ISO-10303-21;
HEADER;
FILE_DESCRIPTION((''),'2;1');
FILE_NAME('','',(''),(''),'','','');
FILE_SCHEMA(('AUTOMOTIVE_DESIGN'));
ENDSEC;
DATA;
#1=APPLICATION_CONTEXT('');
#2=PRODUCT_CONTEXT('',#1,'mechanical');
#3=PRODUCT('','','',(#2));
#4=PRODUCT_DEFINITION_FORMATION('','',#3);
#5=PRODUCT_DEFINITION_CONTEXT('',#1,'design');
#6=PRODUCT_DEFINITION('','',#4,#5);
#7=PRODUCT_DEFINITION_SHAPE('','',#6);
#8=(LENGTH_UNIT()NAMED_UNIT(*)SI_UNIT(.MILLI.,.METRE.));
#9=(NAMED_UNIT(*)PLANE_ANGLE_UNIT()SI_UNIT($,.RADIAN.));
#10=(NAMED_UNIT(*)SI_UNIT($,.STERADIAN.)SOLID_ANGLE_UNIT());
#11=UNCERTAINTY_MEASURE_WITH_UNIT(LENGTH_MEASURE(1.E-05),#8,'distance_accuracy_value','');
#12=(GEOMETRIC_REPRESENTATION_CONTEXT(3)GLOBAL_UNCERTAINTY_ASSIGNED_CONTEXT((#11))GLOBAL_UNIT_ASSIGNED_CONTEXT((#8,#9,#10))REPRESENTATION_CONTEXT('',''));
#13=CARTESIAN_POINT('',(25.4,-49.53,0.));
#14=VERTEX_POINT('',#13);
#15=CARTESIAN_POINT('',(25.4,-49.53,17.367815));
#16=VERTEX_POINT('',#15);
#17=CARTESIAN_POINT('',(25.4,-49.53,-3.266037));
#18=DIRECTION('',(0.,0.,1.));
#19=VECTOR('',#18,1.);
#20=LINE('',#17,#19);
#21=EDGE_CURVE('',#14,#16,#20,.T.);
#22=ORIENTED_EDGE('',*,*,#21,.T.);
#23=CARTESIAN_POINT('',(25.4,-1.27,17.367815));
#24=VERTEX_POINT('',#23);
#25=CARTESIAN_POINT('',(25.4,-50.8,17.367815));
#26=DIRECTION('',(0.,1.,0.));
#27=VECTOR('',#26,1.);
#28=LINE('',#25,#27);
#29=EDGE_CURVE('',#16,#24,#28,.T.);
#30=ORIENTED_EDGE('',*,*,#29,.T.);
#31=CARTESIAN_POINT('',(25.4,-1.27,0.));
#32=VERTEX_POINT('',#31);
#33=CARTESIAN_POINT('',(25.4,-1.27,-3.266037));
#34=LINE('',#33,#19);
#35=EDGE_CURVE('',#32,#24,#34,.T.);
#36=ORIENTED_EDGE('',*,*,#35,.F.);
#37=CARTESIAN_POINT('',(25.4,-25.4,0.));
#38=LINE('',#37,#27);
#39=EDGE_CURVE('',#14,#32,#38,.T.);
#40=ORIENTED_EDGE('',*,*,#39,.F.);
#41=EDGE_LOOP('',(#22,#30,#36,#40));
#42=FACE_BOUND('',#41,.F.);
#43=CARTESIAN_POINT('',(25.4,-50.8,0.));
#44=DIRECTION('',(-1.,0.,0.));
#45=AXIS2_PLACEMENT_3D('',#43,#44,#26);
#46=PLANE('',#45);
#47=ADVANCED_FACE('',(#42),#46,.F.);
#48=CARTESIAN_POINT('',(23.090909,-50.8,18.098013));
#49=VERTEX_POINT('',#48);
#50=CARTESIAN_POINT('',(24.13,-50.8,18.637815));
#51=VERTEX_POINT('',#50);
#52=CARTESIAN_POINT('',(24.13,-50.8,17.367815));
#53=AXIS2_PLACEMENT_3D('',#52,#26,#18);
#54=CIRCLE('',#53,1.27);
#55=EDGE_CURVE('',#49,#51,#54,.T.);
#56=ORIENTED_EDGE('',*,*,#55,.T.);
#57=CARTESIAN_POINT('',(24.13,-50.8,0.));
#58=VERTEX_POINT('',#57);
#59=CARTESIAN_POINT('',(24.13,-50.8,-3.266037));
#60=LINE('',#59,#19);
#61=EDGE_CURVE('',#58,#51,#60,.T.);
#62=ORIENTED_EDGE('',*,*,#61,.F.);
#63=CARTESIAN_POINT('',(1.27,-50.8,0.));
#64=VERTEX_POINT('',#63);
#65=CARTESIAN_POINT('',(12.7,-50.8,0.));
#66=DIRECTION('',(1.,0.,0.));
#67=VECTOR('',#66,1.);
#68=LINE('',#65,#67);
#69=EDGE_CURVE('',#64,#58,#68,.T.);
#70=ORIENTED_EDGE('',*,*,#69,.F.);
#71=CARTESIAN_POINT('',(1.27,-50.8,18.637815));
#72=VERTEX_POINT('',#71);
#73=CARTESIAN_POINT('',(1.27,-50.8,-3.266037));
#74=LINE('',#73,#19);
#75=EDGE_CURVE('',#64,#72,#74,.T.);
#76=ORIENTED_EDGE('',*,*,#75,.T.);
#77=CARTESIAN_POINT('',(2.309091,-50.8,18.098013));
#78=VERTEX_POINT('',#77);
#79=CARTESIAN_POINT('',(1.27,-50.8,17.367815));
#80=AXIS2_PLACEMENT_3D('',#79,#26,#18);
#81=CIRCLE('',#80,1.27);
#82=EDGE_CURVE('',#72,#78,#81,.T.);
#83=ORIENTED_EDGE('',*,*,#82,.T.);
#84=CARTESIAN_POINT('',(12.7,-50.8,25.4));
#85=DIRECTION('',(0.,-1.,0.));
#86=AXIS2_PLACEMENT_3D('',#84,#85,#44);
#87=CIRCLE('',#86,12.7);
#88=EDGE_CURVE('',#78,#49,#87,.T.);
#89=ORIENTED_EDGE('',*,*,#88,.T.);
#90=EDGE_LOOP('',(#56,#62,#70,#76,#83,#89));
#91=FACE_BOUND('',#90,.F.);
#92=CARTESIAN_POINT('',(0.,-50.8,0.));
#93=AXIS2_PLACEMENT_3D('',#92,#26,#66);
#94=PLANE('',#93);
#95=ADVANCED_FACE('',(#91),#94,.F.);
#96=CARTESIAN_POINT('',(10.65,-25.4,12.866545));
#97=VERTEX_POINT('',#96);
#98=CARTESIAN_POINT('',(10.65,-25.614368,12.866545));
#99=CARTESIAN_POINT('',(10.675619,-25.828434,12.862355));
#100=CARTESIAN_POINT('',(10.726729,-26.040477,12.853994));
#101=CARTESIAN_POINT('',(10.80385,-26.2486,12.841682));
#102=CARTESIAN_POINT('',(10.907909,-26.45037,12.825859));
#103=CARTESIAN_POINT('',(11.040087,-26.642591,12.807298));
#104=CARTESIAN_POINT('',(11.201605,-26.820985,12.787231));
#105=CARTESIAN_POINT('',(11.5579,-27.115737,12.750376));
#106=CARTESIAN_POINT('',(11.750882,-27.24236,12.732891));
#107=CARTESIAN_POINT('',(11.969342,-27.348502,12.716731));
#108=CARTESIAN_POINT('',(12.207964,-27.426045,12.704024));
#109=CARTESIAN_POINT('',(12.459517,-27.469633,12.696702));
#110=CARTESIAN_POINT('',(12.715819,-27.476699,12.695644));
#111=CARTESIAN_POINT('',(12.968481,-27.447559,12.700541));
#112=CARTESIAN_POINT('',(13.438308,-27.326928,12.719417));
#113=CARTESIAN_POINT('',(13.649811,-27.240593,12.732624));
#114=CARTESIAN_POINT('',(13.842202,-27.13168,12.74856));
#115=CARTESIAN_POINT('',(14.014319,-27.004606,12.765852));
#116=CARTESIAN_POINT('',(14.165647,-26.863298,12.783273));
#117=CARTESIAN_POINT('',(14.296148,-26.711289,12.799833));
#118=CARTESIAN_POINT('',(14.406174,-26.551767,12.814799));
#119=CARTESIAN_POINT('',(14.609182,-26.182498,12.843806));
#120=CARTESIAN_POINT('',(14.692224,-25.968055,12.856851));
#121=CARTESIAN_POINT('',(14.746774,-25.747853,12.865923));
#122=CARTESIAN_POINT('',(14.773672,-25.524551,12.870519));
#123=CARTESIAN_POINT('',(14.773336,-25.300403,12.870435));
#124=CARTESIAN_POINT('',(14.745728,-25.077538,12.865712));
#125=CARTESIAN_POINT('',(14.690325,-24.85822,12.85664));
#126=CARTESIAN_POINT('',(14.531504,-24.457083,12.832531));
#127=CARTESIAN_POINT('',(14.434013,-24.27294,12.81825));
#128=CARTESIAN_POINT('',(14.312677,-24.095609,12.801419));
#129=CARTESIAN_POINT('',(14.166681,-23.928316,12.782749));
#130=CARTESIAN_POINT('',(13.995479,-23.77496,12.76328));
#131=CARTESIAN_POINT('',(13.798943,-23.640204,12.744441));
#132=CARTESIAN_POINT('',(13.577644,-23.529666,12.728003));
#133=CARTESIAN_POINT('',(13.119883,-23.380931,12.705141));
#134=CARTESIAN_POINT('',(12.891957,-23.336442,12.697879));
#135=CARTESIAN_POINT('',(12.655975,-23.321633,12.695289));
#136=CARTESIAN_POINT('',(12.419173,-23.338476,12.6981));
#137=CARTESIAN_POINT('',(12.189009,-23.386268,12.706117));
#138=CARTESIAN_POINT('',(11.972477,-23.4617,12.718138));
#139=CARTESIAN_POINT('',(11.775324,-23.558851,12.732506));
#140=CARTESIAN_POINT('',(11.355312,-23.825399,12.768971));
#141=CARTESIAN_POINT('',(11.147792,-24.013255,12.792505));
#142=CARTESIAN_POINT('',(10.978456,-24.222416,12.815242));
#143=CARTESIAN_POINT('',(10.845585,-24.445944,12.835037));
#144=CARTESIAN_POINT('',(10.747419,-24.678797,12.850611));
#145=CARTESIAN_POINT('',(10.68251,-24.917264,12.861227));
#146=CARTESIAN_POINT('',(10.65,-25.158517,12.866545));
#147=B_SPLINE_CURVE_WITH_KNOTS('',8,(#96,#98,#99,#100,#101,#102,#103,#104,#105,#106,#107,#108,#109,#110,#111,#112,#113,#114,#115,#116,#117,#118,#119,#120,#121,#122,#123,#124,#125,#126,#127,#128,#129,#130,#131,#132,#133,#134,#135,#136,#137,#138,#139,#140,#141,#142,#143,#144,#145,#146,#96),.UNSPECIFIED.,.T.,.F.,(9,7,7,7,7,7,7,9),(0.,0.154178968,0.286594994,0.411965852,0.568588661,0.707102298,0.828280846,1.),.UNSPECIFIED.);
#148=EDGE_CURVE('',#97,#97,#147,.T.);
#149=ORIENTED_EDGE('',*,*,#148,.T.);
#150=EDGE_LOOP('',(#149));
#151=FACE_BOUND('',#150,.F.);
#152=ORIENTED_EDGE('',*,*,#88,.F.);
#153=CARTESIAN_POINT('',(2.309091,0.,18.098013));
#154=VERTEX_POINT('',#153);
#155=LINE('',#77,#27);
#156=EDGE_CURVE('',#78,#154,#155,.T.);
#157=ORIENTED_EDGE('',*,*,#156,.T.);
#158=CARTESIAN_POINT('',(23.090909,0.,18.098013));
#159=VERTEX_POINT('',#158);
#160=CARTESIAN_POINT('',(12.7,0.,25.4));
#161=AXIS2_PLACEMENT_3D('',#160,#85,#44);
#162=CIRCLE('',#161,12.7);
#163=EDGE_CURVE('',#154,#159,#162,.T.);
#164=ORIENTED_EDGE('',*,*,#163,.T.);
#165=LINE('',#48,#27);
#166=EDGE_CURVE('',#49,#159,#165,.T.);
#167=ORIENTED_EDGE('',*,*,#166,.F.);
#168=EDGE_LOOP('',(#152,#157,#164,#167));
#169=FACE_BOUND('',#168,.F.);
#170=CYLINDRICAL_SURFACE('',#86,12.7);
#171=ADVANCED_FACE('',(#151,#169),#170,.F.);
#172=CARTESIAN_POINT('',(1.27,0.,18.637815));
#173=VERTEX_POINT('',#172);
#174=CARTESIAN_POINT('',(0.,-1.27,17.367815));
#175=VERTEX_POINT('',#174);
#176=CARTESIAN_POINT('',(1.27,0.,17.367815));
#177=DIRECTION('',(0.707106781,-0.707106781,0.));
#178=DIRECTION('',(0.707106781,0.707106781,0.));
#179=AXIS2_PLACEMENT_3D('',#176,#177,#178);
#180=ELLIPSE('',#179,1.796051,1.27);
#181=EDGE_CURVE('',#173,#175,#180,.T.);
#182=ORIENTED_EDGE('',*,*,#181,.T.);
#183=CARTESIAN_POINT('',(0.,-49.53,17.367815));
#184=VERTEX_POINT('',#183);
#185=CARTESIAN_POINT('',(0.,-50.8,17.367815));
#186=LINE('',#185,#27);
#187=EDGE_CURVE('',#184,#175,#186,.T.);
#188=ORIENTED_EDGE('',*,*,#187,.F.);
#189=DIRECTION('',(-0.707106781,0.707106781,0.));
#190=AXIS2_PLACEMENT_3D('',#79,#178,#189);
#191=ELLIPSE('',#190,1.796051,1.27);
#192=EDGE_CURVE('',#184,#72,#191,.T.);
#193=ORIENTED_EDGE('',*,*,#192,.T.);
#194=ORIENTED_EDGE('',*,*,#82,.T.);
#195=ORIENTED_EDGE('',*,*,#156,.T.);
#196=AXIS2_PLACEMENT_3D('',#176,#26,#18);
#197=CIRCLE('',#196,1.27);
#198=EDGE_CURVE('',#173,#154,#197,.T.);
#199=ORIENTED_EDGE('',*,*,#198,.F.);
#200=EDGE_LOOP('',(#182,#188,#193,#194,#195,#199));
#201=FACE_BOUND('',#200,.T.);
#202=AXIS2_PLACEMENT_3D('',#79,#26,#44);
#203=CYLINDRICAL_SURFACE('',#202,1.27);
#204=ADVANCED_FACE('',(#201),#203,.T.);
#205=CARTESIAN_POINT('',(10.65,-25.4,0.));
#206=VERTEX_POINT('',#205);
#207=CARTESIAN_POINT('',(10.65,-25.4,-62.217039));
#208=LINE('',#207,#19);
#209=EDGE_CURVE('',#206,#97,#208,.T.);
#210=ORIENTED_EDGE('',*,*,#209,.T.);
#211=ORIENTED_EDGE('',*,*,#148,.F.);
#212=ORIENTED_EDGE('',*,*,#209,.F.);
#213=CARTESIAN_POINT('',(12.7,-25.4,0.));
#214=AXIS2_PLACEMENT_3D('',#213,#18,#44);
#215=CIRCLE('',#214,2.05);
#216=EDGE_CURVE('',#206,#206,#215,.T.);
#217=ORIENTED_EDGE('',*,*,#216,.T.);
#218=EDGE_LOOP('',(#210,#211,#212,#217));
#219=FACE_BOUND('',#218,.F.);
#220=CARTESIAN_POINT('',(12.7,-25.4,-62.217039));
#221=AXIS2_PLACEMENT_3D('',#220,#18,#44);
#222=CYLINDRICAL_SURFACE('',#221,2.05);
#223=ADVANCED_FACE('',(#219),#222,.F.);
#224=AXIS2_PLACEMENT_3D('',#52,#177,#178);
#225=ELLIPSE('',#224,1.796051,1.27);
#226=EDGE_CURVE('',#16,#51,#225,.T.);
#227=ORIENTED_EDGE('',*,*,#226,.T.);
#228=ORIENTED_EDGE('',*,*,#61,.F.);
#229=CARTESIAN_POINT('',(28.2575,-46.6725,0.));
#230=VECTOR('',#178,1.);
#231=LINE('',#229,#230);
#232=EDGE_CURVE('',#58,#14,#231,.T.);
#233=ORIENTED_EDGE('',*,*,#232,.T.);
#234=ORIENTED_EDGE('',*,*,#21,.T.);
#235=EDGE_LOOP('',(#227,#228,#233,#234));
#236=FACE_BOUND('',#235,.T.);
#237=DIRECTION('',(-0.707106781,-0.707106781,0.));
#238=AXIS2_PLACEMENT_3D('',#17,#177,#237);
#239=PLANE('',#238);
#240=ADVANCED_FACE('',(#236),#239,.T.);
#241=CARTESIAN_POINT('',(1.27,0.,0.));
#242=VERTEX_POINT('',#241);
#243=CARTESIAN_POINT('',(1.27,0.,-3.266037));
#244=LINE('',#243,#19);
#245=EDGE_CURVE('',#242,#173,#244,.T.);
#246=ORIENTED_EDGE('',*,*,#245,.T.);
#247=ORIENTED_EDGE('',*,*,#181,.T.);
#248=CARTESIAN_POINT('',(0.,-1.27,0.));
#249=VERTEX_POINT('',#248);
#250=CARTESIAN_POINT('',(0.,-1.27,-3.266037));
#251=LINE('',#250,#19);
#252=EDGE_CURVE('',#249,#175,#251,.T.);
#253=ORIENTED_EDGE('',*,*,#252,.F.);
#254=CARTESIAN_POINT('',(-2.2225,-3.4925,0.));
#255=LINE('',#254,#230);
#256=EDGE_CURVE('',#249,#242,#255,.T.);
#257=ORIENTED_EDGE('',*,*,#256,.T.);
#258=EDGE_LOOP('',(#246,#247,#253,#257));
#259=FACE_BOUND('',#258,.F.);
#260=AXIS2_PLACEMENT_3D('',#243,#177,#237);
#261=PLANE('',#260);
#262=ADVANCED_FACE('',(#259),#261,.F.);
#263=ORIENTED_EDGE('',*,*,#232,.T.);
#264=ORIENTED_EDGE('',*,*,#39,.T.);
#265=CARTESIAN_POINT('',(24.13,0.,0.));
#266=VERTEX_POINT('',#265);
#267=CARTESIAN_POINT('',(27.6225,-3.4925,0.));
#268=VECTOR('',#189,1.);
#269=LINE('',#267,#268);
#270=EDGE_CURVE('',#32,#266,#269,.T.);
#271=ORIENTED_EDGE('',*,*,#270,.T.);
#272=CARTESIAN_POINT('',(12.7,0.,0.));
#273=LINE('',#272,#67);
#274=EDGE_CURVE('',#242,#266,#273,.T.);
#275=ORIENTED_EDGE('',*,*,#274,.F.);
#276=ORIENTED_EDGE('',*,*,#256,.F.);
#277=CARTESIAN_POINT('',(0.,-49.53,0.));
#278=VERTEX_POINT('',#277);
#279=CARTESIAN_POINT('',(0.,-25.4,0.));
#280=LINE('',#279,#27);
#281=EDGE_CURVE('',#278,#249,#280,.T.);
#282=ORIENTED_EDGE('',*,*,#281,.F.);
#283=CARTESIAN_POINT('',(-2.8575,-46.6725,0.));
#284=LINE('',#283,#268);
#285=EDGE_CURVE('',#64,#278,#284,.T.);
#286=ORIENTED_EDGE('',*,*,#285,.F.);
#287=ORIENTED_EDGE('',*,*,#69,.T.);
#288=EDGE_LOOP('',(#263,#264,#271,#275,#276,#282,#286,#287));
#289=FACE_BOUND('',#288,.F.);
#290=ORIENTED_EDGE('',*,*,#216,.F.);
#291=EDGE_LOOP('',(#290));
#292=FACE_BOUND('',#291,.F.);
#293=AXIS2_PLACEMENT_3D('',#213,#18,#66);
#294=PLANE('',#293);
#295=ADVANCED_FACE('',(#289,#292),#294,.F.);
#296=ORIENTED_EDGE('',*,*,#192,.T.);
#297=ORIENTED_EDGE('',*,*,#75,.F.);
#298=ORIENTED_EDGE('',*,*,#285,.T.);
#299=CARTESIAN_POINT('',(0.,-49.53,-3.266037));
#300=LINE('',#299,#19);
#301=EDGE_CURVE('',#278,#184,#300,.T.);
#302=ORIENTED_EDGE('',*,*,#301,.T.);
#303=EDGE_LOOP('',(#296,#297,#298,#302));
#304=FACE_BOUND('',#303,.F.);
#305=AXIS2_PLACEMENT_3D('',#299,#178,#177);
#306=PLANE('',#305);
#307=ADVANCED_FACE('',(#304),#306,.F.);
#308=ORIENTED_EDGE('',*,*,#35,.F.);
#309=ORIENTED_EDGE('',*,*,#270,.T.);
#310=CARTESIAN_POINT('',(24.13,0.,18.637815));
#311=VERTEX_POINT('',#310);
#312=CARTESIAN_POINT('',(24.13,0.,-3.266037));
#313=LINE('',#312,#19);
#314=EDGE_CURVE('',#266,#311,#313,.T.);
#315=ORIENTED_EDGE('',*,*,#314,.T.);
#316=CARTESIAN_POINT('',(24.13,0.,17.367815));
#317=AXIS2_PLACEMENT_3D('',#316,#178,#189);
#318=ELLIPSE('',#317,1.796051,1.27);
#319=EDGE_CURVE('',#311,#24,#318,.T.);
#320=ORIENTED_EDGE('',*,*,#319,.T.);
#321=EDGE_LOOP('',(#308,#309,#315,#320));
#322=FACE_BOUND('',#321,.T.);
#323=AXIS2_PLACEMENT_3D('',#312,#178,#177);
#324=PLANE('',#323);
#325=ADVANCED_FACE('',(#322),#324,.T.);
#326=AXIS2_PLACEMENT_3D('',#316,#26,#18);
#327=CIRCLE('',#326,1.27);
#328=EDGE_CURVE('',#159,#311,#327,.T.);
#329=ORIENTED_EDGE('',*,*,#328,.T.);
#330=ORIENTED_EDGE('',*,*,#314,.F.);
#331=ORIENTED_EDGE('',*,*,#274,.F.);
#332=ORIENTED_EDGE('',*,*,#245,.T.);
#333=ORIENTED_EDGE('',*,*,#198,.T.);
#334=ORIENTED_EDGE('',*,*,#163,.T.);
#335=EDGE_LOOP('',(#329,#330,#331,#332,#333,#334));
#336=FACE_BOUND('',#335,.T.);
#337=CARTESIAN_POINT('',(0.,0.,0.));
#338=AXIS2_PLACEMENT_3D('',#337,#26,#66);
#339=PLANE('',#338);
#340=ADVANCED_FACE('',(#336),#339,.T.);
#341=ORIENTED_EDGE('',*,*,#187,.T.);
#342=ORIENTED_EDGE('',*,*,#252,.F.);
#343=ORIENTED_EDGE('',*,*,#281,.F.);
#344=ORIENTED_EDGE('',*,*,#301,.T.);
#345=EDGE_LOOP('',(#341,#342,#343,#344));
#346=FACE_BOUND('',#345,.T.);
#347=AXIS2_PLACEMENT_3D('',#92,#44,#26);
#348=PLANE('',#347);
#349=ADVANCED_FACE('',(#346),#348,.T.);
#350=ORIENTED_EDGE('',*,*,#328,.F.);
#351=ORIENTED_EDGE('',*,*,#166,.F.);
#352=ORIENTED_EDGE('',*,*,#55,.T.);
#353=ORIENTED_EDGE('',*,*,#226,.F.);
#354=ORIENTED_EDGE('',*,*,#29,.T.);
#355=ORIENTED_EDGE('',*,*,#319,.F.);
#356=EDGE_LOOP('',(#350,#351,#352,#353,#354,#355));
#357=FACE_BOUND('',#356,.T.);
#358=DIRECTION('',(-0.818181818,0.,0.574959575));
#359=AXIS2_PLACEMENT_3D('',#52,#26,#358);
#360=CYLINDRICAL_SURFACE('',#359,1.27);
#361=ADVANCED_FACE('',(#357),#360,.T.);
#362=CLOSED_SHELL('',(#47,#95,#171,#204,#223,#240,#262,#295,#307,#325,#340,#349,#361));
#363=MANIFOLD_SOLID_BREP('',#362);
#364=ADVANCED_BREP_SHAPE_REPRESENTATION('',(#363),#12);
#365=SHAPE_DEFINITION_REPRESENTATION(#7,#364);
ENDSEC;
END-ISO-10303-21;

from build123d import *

# Parameters (mm, degrees)
F0_W        = 25.4
F0_H        = 50.8
F1_DEPTH    = 25.4
F3_DEPTH    = 50.8
F5_D        = 4.1
F6_F1_R     = 1.27
F6_F2_R     = 1.27
F7_T1_DEPTH = 23.8998895326


# Not quite as in the source:
# - a fillet or chamfer that OpenCascade refuses, or shapes differently, is made with other operations: its cross-section is extruded or revolved along the edge and cut away or added


with BuildPart() as f1:
    # F0 (on Top) → F1 (new body)
    with BuildSketch(Plane.XY):
        with Locations((12.7, -25.4)):
            Rectangle(F0_W, F0_H)
    extrude(amount=F1_DEPTH)

    # F2 (on face) → F3 (cut)
    with BuildSketch(Plane.XZ.offset(50.8)):
        with BuildLine():
            ThreePointArc((0, 25.4), (12.7, 12.7), (25.4, 25.4))
            Line((25.4, 25.4), (0, 25.4))
        make_face()
    extrude(amount=-F3_DEPTH, mode=Mode.SUBTRACT)

    # F5 (through all)
    with Locations(Plane(origin=(0, 0, 0), x_dir=(1, 0, 0), z_dir=(0, 0, -1))):
        with Locations((12.7, 25.4)):
            Hole(F5_D / 2)

    # F6: fillet of radius 1.27 on 2 edges, made by hand

    # F6_f1
    f6_f1_edges = [f1.edges().sort_by_distance(p)[0] for p in [
        (0, -25.4, 25.4),
    ]]
    fillet(f6_f1_edges, radius=F6_F1_R)

    # F6_f2
    f6_f2_edges = [f1.edges().sort_by_distance(p)[0] for p in [
        (25.4, -25.4, 25.4),
    ]]
    fillet(f6_f2_edges, radius=F6_F2_R)

    # F7: chamfer of 1.27 on 4 edges, made by hand

    # F7_s2 → F7_t1 (cut)
    with BuildSketch(Plane.XY.offset(-3.2660373947)):
        Polygon((25.4, -49.53), (24.13, -50.8), (25.4, -50.8), align=None)
        Polygon((0, -49.53), (1.27, -50.8), (0, -50.8), align=None)
        Polygon((24.13, 0), (25.4, -1.27), (25.4, 0), align=None)
        Polygon((1.27, 0), (0, -1.27), (0, 0), align=None)
    extrude(amount=F7_T1_DEPTH, mode=Mode.SUBTRACT)


solid = f1.part
